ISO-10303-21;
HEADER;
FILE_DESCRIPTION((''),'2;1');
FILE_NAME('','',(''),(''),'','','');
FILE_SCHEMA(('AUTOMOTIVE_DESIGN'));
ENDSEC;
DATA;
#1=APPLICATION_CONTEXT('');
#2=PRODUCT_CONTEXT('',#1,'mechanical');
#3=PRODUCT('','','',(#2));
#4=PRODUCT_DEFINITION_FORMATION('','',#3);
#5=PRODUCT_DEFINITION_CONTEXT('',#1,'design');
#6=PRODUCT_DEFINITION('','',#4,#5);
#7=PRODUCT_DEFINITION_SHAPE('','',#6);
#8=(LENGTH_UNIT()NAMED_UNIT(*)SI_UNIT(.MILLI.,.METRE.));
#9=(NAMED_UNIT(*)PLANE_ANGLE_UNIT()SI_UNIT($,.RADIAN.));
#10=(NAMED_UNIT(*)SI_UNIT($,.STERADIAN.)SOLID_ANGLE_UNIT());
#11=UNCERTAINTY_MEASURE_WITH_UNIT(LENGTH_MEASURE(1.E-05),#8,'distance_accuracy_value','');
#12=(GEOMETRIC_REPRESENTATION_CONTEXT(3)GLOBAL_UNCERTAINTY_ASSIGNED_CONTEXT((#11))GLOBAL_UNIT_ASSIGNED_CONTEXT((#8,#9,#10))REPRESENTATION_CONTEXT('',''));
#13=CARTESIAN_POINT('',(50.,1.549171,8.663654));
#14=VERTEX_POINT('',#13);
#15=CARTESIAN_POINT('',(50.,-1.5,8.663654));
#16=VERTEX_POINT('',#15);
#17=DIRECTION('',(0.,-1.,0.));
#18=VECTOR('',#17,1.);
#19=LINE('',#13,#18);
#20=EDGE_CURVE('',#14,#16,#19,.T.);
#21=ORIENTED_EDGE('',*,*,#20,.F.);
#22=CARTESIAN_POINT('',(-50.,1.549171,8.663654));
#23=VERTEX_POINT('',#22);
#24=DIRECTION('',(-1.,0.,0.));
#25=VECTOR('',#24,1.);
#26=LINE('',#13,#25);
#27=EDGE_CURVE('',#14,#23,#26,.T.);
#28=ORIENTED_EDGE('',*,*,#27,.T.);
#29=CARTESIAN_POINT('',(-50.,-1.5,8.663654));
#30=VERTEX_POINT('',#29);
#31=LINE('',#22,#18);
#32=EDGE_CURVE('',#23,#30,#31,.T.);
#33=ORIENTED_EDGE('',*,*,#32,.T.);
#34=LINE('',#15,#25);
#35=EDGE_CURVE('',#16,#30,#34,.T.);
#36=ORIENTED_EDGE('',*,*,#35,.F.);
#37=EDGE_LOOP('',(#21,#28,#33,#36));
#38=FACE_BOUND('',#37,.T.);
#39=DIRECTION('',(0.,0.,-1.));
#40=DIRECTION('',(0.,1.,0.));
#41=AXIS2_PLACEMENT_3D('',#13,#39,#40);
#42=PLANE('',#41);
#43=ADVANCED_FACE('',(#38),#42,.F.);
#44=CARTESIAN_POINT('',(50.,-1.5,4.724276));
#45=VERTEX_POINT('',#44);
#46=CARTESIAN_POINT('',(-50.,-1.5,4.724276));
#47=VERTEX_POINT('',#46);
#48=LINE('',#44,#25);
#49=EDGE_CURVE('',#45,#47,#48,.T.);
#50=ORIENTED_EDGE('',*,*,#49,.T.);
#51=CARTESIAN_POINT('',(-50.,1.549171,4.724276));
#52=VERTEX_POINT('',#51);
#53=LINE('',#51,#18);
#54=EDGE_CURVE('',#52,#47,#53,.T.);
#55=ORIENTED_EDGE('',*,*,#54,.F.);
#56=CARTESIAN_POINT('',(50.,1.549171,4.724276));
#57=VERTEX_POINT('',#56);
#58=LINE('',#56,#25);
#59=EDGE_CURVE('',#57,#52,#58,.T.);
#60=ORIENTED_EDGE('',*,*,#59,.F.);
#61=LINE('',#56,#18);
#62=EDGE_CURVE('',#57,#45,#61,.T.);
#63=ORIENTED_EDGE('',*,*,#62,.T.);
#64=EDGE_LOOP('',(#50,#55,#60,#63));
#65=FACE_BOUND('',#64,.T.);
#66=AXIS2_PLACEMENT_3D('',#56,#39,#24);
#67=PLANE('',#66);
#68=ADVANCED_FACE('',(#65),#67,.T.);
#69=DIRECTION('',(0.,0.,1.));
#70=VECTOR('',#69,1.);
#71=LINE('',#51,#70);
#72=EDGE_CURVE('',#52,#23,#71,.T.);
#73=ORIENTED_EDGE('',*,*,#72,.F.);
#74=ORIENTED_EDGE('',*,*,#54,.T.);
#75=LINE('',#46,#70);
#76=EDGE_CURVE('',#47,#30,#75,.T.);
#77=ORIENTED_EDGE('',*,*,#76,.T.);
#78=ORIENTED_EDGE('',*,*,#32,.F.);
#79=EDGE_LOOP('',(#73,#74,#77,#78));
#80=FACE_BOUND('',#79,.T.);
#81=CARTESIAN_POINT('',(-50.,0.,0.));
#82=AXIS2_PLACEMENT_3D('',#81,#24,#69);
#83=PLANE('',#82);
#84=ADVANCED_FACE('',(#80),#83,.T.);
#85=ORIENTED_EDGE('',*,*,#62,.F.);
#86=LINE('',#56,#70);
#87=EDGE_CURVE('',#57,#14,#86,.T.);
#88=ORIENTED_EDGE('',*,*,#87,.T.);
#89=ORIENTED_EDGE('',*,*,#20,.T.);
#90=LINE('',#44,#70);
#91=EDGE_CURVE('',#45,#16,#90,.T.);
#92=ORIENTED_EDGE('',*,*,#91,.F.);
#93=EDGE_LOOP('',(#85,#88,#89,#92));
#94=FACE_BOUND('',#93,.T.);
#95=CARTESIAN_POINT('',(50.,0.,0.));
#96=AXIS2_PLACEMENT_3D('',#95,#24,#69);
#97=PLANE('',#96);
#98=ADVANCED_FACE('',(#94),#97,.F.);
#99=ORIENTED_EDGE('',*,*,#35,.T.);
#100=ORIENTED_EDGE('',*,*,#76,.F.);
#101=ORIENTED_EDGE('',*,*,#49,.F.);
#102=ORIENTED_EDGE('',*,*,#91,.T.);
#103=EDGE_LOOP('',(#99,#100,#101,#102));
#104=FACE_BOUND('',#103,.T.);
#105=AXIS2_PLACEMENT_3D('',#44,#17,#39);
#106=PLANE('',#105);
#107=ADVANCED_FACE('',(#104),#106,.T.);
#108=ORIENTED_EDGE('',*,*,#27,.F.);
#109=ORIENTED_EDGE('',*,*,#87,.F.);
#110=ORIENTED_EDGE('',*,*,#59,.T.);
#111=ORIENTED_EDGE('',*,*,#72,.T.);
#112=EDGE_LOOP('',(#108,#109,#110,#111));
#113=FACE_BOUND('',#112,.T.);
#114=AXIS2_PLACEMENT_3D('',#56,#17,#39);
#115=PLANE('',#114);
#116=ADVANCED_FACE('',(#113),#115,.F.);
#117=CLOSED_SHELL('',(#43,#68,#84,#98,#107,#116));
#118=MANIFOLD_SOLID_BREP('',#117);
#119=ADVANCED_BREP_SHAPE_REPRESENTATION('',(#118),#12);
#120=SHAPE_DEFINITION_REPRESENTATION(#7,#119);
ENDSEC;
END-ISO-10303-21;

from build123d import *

# Parameters (mm, degrees)
BOSS_EXTRUDE2_START     = -50
BOSS_EXTRUDE2_OUTLINE_W = 3.939378075
BOSS_EXTRUDE2_OUTLINE_H = 3.049171024
BOSS_EXTRUDE2_DEPTH     = 100


# Read off the part's stored shape, not the designer's step: Boss-Extrude2
with BuildPart() as part:
    # Boss-Extrude2 outline → Boss-Extrude2 (new body)
    with BuildSketch(Plane(origin=(0, 0, 0), x_dir=(0, 0, -1), z_dir=(1, 0, 0)).offset(BOSS_EXTRUDE2_START)):
        with Locations((-6.693964747, 0.024585512)):
            Rectangle(BOSS_EXTRUDE2_OUTLINE_W, BOSS_EXTRUDE2_OUTLINE_H)
    extrude(amount=BOSS_EXTRUDE2_DEPTH)


solid = part.part
